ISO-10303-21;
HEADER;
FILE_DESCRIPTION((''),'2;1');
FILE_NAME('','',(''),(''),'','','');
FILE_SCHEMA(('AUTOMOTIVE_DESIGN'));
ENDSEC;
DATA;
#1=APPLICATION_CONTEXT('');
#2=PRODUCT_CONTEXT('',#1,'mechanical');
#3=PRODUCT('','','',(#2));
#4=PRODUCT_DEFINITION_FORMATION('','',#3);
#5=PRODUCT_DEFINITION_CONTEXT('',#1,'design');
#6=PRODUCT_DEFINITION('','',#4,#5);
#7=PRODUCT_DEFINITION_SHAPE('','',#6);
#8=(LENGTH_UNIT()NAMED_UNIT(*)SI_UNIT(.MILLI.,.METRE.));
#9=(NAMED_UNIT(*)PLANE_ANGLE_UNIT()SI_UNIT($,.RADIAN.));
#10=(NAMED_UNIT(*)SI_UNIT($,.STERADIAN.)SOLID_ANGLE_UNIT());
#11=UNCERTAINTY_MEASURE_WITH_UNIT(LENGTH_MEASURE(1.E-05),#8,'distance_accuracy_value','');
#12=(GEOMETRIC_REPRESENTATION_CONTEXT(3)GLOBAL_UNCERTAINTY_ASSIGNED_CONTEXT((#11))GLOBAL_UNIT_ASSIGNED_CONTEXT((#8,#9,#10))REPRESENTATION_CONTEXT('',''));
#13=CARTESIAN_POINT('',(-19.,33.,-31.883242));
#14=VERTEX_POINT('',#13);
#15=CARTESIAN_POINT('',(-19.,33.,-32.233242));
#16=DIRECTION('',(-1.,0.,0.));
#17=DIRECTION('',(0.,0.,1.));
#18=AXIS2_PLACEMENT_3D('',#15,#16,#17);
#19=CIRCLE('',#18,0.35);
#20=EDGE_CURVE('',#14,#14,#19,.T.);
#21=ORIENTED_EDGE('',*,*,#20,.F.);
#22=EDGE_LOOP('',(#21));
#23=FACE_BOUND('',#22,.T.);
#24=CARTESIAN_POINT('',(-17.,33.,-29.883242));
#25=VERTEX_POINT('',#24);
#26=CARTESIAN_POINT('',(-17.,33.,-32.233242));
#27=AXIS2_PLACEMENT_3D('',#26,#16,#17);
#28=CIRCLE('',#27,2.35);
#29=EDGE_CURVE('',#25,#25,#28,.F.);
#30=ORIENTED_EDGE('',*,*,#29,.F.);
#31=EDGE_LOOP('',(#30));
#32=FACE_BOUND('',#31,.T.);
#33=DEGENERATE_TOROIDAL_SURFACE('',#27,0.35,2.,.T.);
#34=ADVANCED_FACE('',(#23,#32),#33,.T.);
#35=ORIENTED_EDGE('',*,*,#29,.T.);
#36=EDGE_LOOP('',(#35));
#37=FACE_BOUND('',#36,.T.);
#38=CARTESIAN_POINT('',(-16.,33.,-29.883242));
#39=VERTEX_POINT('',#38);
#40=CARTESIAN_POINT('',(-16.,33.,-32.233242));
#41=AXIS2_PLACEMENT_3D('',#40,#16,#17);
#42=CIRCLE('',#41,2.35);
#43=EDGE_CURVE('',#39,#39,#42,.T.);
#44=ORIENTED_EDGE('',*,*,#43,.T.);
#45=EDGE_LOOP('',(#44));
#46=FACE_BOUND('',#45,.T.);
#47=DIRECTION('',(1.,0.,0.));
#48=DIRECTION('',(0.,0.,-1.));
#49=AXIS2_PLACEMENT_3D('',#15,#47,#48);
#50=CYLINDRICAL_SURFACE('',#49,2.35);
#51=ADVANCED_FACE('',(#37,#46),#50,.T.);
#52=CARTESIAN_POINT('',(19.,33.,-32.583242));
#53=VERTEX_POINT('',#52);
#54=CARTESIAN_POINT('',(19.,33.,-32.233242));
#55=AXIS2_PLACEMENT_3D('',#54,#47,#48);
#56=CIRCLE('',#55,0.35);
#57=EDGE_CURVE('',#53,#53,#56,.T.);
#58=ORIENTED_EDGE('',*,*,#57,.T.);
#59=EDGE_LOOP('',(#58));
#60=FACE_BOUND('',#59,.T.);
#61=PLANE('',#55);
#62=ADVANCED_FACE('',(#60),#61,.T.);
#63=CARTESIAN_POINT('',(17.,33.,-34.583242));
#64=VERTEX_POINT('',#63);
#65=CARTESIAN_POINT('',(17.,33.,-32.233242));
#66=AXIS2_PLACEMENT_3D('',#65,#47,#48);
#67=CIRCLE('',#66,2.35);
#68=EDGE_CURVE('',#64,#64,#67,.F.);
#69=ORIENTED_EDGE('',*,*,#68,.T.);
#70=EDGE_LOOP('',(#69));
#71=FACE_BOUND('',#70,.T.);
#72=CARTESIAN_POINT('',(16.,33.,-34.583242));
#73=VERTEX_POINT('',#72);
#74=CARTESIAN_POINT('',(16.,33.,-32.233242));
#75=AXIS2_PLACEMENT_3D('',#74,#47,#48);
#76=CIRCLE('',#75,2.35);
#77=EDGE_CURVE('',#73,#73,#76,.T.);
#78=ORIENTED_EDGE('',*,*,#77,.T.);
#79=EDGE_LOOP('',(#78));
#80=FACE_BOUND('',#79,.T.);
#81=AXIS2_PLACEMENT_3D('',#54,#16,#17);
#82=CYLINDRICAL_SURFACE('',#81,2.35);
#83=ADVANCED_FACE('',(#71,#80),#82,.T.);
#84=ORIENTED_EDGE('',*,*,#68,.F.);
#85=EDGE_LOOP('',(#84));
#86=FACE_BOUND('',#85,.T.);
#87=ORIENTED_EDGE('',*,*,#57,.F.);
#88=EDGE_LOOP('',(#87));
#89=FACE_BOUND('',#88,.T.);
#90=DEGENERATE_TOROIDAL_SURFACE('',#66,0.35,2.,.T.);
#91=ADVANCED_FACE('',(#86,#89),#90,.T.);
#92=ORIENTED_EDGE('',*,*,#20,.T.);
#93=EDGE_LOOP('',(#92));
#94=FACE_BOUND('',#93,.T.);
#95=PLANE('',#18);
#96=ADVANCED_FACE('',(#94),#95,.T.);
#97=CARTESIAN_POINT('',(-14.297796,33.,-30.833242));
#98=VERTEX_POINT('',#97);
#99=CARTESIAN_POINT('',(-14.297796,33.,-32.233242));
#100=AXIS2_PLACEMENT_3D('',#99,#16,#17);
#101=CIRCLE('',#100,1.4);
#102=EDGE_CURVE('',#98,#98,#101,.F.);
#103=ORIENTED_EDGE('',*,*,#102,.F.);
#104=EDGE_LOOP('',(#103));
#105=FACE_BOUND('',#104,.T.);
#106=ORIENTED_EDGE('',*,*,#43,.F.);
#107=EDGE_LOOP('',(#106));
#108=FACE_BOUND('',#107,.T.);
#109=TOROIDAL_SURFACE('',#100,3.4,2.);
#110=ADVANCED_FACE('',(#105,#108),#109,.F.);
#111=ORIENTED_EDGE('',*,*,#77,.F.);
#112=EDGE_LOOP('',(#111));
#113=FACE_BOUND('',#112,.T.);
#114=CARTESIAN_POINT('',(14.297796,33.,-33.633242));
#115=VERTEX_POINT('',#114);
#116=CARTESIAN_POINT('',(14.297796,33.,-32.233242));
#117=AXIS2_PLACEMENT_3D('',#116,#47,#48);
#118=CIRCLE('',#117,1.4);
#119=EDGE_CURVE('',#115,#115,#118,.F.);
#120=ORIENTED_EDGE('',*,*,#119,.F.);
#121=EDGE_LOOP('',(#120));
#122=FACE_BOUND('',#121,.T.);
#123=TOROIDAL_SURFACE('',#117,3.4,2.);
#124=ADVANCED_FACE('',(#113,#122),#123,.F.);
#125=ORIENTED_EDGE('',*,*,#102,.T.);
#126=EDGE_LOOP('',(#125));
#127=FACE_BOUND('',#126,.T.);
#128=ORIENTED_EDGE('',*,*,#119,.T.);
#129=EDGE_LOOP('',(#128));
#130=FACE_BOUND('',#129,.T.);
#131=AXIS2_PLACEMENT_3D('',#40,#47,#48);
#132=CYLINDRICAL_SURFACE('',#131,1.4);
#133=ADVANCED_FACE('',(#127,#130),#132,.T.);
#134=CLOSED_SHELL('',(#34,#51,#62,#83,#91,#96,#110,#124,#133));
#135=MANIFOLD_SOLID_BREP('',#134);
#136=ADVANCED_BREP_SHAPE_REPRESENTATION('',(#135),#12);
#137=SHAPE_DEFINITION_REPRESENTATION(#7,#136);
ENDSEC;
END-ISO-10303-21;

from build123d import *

# Parameters (mm, degrees)
BOSS_EXTRUDE1_START = 1
SKETCH1_R           = 1.4
BOSS_EXTRUDE1_DEPTH = 32
SKETCH2_R           = 2.35
BOSS_EXTRUDE2_DEPTH = 3
FILLET1_R           = 2
BOSS_EXTRUDE3_START = 3
SKETCH3_R           = 2.35
BOSS_EXTRUDE3_DEPTH = 3
FILLET2_R           = 2


with BuildPart() as part:
    # Sketch1 → Boss-Extrude1 (new body)
    with BuildSketch(Plane(origin=(15, 0, 0), x_dir=(0, 0, -1), z_dir=(1, 0, 0)).offset(BOSS_EXTRUDE1_START)):
        with Locations((32.233241632, 33)):
            Circle(SKETCH1_R)
    extrude(amount=-BOSS_EXTRUDE1_DEPTH)

    # Sketch2 → Boss-Extrude2 (add)
    with BuildSketch(Plane(origin=(16, 0, 0), x_dir=(0, 0, -1), z_dir=(1, 0, 0))):
        with Locations((32.233241632, 33)):
            Circle(SKETCH2_R)
    extrude(amount=BOSS_EXTRUDE2_DEPTH)

    # Fillet1
    # the kernel refuses this fillet: 2 mm, written as the material it adds along each edge
    with BuildSketch(Plane(origin=(16, 33, -32.233241632), x_dir=(0, 0, -1), z_dir=(0, -1, 0))) as fillet1_piece_1:
        with BuildLine():
            CenterArc((3.4, -1.702204453), FILLET1_R, 121.668243254, 58.331756746)
            Line((1.4, -1.702204453), (1.4, 0))
            Line((1.4, 0), (2.35, 0))
        make_face()
    revolve(axis=Axis((16, 33, -32.233241632), (1, 0, 0)))
    # the kernel refuses this fillet: 2 mm, written as the material it takes off along each edge
    with BuildSketch(Plane(origin=(19, 33, -32.233241632), x_dir=(0, 0, -1), z_dir=(0, -1, 0))) as fillet1_2_piece_1:
        with BuildLine():
            CenterArc((2.35 - FILLET1_R, -FILLET1_R), FILLET1_R, 0, 90)
            Line((2.35 - FILLET1_R, 0), (2.35, 0))
            Line((2.35, 0), (2.35, -FILLET1_R))
        make_face()
    revolve(axis=Axis((19, 33, -32.233241632), (1, 0, 0)), mode=Mode.SUBTRACT)

    # Sketch3 → Boss-Extrude3 (add)
    with BuildSketch(Plane.ZY.offset(16).offset(BOSS_EXTRUDE3_START)):
        with Locations(Location((-32.233241632, 33, 0), (0, 0, 180))):
            Circle(SKETCH3_R)
    extrude(amount=-BOSS_EXTRUDE3_DEPTH)

    # Fillet2
    # the kernel refuses this fillet: 2 mm, written as the material it adds along each edge
    with BuildSketch(Plane(origin=(-16, 33, -32.233241632), x_dir=(0, 0, -1), z_dir=(0, -1, 0))) as fillet2_piece_1:
        with BuildLine():
            CenterArc((3.4, 1.702204453), FILLET2_R, 180, 58.331756746)
            Line((1.4, 1.702204453), (1.4, 0))
            Line((1.4, 0), (2.35, 0))
        make_face()
    revolve(axis=Axis((-16, 33, -32.233241632), (1, 0, 0)))
    # the kernel refuses this fillet: 2 mm, written as the material it takes off along each edge
    with BuildSketch(Plane(origin=(-19, 33, -32.233241632), x_dir=(0, 0, -1), z_dir=(0, 1, 0))) as fillet2_2_piece_1:
        with BuildLine():
            CenterArc((2.35 - FILLET2_R, -FILLET2_R), FILLET2_R, 360, 90)
            Line((2.35 - FILLET2_R, 0), (2.35, 0))
            Line((2.35, 0), (2.35, -FILLET2_R))
        make_face()
    revolve(axis=Axis((-19, 33, -32.233241632), (-1, 0, 0)), mode=Mode.SUBTRACT)


solid = part.part
